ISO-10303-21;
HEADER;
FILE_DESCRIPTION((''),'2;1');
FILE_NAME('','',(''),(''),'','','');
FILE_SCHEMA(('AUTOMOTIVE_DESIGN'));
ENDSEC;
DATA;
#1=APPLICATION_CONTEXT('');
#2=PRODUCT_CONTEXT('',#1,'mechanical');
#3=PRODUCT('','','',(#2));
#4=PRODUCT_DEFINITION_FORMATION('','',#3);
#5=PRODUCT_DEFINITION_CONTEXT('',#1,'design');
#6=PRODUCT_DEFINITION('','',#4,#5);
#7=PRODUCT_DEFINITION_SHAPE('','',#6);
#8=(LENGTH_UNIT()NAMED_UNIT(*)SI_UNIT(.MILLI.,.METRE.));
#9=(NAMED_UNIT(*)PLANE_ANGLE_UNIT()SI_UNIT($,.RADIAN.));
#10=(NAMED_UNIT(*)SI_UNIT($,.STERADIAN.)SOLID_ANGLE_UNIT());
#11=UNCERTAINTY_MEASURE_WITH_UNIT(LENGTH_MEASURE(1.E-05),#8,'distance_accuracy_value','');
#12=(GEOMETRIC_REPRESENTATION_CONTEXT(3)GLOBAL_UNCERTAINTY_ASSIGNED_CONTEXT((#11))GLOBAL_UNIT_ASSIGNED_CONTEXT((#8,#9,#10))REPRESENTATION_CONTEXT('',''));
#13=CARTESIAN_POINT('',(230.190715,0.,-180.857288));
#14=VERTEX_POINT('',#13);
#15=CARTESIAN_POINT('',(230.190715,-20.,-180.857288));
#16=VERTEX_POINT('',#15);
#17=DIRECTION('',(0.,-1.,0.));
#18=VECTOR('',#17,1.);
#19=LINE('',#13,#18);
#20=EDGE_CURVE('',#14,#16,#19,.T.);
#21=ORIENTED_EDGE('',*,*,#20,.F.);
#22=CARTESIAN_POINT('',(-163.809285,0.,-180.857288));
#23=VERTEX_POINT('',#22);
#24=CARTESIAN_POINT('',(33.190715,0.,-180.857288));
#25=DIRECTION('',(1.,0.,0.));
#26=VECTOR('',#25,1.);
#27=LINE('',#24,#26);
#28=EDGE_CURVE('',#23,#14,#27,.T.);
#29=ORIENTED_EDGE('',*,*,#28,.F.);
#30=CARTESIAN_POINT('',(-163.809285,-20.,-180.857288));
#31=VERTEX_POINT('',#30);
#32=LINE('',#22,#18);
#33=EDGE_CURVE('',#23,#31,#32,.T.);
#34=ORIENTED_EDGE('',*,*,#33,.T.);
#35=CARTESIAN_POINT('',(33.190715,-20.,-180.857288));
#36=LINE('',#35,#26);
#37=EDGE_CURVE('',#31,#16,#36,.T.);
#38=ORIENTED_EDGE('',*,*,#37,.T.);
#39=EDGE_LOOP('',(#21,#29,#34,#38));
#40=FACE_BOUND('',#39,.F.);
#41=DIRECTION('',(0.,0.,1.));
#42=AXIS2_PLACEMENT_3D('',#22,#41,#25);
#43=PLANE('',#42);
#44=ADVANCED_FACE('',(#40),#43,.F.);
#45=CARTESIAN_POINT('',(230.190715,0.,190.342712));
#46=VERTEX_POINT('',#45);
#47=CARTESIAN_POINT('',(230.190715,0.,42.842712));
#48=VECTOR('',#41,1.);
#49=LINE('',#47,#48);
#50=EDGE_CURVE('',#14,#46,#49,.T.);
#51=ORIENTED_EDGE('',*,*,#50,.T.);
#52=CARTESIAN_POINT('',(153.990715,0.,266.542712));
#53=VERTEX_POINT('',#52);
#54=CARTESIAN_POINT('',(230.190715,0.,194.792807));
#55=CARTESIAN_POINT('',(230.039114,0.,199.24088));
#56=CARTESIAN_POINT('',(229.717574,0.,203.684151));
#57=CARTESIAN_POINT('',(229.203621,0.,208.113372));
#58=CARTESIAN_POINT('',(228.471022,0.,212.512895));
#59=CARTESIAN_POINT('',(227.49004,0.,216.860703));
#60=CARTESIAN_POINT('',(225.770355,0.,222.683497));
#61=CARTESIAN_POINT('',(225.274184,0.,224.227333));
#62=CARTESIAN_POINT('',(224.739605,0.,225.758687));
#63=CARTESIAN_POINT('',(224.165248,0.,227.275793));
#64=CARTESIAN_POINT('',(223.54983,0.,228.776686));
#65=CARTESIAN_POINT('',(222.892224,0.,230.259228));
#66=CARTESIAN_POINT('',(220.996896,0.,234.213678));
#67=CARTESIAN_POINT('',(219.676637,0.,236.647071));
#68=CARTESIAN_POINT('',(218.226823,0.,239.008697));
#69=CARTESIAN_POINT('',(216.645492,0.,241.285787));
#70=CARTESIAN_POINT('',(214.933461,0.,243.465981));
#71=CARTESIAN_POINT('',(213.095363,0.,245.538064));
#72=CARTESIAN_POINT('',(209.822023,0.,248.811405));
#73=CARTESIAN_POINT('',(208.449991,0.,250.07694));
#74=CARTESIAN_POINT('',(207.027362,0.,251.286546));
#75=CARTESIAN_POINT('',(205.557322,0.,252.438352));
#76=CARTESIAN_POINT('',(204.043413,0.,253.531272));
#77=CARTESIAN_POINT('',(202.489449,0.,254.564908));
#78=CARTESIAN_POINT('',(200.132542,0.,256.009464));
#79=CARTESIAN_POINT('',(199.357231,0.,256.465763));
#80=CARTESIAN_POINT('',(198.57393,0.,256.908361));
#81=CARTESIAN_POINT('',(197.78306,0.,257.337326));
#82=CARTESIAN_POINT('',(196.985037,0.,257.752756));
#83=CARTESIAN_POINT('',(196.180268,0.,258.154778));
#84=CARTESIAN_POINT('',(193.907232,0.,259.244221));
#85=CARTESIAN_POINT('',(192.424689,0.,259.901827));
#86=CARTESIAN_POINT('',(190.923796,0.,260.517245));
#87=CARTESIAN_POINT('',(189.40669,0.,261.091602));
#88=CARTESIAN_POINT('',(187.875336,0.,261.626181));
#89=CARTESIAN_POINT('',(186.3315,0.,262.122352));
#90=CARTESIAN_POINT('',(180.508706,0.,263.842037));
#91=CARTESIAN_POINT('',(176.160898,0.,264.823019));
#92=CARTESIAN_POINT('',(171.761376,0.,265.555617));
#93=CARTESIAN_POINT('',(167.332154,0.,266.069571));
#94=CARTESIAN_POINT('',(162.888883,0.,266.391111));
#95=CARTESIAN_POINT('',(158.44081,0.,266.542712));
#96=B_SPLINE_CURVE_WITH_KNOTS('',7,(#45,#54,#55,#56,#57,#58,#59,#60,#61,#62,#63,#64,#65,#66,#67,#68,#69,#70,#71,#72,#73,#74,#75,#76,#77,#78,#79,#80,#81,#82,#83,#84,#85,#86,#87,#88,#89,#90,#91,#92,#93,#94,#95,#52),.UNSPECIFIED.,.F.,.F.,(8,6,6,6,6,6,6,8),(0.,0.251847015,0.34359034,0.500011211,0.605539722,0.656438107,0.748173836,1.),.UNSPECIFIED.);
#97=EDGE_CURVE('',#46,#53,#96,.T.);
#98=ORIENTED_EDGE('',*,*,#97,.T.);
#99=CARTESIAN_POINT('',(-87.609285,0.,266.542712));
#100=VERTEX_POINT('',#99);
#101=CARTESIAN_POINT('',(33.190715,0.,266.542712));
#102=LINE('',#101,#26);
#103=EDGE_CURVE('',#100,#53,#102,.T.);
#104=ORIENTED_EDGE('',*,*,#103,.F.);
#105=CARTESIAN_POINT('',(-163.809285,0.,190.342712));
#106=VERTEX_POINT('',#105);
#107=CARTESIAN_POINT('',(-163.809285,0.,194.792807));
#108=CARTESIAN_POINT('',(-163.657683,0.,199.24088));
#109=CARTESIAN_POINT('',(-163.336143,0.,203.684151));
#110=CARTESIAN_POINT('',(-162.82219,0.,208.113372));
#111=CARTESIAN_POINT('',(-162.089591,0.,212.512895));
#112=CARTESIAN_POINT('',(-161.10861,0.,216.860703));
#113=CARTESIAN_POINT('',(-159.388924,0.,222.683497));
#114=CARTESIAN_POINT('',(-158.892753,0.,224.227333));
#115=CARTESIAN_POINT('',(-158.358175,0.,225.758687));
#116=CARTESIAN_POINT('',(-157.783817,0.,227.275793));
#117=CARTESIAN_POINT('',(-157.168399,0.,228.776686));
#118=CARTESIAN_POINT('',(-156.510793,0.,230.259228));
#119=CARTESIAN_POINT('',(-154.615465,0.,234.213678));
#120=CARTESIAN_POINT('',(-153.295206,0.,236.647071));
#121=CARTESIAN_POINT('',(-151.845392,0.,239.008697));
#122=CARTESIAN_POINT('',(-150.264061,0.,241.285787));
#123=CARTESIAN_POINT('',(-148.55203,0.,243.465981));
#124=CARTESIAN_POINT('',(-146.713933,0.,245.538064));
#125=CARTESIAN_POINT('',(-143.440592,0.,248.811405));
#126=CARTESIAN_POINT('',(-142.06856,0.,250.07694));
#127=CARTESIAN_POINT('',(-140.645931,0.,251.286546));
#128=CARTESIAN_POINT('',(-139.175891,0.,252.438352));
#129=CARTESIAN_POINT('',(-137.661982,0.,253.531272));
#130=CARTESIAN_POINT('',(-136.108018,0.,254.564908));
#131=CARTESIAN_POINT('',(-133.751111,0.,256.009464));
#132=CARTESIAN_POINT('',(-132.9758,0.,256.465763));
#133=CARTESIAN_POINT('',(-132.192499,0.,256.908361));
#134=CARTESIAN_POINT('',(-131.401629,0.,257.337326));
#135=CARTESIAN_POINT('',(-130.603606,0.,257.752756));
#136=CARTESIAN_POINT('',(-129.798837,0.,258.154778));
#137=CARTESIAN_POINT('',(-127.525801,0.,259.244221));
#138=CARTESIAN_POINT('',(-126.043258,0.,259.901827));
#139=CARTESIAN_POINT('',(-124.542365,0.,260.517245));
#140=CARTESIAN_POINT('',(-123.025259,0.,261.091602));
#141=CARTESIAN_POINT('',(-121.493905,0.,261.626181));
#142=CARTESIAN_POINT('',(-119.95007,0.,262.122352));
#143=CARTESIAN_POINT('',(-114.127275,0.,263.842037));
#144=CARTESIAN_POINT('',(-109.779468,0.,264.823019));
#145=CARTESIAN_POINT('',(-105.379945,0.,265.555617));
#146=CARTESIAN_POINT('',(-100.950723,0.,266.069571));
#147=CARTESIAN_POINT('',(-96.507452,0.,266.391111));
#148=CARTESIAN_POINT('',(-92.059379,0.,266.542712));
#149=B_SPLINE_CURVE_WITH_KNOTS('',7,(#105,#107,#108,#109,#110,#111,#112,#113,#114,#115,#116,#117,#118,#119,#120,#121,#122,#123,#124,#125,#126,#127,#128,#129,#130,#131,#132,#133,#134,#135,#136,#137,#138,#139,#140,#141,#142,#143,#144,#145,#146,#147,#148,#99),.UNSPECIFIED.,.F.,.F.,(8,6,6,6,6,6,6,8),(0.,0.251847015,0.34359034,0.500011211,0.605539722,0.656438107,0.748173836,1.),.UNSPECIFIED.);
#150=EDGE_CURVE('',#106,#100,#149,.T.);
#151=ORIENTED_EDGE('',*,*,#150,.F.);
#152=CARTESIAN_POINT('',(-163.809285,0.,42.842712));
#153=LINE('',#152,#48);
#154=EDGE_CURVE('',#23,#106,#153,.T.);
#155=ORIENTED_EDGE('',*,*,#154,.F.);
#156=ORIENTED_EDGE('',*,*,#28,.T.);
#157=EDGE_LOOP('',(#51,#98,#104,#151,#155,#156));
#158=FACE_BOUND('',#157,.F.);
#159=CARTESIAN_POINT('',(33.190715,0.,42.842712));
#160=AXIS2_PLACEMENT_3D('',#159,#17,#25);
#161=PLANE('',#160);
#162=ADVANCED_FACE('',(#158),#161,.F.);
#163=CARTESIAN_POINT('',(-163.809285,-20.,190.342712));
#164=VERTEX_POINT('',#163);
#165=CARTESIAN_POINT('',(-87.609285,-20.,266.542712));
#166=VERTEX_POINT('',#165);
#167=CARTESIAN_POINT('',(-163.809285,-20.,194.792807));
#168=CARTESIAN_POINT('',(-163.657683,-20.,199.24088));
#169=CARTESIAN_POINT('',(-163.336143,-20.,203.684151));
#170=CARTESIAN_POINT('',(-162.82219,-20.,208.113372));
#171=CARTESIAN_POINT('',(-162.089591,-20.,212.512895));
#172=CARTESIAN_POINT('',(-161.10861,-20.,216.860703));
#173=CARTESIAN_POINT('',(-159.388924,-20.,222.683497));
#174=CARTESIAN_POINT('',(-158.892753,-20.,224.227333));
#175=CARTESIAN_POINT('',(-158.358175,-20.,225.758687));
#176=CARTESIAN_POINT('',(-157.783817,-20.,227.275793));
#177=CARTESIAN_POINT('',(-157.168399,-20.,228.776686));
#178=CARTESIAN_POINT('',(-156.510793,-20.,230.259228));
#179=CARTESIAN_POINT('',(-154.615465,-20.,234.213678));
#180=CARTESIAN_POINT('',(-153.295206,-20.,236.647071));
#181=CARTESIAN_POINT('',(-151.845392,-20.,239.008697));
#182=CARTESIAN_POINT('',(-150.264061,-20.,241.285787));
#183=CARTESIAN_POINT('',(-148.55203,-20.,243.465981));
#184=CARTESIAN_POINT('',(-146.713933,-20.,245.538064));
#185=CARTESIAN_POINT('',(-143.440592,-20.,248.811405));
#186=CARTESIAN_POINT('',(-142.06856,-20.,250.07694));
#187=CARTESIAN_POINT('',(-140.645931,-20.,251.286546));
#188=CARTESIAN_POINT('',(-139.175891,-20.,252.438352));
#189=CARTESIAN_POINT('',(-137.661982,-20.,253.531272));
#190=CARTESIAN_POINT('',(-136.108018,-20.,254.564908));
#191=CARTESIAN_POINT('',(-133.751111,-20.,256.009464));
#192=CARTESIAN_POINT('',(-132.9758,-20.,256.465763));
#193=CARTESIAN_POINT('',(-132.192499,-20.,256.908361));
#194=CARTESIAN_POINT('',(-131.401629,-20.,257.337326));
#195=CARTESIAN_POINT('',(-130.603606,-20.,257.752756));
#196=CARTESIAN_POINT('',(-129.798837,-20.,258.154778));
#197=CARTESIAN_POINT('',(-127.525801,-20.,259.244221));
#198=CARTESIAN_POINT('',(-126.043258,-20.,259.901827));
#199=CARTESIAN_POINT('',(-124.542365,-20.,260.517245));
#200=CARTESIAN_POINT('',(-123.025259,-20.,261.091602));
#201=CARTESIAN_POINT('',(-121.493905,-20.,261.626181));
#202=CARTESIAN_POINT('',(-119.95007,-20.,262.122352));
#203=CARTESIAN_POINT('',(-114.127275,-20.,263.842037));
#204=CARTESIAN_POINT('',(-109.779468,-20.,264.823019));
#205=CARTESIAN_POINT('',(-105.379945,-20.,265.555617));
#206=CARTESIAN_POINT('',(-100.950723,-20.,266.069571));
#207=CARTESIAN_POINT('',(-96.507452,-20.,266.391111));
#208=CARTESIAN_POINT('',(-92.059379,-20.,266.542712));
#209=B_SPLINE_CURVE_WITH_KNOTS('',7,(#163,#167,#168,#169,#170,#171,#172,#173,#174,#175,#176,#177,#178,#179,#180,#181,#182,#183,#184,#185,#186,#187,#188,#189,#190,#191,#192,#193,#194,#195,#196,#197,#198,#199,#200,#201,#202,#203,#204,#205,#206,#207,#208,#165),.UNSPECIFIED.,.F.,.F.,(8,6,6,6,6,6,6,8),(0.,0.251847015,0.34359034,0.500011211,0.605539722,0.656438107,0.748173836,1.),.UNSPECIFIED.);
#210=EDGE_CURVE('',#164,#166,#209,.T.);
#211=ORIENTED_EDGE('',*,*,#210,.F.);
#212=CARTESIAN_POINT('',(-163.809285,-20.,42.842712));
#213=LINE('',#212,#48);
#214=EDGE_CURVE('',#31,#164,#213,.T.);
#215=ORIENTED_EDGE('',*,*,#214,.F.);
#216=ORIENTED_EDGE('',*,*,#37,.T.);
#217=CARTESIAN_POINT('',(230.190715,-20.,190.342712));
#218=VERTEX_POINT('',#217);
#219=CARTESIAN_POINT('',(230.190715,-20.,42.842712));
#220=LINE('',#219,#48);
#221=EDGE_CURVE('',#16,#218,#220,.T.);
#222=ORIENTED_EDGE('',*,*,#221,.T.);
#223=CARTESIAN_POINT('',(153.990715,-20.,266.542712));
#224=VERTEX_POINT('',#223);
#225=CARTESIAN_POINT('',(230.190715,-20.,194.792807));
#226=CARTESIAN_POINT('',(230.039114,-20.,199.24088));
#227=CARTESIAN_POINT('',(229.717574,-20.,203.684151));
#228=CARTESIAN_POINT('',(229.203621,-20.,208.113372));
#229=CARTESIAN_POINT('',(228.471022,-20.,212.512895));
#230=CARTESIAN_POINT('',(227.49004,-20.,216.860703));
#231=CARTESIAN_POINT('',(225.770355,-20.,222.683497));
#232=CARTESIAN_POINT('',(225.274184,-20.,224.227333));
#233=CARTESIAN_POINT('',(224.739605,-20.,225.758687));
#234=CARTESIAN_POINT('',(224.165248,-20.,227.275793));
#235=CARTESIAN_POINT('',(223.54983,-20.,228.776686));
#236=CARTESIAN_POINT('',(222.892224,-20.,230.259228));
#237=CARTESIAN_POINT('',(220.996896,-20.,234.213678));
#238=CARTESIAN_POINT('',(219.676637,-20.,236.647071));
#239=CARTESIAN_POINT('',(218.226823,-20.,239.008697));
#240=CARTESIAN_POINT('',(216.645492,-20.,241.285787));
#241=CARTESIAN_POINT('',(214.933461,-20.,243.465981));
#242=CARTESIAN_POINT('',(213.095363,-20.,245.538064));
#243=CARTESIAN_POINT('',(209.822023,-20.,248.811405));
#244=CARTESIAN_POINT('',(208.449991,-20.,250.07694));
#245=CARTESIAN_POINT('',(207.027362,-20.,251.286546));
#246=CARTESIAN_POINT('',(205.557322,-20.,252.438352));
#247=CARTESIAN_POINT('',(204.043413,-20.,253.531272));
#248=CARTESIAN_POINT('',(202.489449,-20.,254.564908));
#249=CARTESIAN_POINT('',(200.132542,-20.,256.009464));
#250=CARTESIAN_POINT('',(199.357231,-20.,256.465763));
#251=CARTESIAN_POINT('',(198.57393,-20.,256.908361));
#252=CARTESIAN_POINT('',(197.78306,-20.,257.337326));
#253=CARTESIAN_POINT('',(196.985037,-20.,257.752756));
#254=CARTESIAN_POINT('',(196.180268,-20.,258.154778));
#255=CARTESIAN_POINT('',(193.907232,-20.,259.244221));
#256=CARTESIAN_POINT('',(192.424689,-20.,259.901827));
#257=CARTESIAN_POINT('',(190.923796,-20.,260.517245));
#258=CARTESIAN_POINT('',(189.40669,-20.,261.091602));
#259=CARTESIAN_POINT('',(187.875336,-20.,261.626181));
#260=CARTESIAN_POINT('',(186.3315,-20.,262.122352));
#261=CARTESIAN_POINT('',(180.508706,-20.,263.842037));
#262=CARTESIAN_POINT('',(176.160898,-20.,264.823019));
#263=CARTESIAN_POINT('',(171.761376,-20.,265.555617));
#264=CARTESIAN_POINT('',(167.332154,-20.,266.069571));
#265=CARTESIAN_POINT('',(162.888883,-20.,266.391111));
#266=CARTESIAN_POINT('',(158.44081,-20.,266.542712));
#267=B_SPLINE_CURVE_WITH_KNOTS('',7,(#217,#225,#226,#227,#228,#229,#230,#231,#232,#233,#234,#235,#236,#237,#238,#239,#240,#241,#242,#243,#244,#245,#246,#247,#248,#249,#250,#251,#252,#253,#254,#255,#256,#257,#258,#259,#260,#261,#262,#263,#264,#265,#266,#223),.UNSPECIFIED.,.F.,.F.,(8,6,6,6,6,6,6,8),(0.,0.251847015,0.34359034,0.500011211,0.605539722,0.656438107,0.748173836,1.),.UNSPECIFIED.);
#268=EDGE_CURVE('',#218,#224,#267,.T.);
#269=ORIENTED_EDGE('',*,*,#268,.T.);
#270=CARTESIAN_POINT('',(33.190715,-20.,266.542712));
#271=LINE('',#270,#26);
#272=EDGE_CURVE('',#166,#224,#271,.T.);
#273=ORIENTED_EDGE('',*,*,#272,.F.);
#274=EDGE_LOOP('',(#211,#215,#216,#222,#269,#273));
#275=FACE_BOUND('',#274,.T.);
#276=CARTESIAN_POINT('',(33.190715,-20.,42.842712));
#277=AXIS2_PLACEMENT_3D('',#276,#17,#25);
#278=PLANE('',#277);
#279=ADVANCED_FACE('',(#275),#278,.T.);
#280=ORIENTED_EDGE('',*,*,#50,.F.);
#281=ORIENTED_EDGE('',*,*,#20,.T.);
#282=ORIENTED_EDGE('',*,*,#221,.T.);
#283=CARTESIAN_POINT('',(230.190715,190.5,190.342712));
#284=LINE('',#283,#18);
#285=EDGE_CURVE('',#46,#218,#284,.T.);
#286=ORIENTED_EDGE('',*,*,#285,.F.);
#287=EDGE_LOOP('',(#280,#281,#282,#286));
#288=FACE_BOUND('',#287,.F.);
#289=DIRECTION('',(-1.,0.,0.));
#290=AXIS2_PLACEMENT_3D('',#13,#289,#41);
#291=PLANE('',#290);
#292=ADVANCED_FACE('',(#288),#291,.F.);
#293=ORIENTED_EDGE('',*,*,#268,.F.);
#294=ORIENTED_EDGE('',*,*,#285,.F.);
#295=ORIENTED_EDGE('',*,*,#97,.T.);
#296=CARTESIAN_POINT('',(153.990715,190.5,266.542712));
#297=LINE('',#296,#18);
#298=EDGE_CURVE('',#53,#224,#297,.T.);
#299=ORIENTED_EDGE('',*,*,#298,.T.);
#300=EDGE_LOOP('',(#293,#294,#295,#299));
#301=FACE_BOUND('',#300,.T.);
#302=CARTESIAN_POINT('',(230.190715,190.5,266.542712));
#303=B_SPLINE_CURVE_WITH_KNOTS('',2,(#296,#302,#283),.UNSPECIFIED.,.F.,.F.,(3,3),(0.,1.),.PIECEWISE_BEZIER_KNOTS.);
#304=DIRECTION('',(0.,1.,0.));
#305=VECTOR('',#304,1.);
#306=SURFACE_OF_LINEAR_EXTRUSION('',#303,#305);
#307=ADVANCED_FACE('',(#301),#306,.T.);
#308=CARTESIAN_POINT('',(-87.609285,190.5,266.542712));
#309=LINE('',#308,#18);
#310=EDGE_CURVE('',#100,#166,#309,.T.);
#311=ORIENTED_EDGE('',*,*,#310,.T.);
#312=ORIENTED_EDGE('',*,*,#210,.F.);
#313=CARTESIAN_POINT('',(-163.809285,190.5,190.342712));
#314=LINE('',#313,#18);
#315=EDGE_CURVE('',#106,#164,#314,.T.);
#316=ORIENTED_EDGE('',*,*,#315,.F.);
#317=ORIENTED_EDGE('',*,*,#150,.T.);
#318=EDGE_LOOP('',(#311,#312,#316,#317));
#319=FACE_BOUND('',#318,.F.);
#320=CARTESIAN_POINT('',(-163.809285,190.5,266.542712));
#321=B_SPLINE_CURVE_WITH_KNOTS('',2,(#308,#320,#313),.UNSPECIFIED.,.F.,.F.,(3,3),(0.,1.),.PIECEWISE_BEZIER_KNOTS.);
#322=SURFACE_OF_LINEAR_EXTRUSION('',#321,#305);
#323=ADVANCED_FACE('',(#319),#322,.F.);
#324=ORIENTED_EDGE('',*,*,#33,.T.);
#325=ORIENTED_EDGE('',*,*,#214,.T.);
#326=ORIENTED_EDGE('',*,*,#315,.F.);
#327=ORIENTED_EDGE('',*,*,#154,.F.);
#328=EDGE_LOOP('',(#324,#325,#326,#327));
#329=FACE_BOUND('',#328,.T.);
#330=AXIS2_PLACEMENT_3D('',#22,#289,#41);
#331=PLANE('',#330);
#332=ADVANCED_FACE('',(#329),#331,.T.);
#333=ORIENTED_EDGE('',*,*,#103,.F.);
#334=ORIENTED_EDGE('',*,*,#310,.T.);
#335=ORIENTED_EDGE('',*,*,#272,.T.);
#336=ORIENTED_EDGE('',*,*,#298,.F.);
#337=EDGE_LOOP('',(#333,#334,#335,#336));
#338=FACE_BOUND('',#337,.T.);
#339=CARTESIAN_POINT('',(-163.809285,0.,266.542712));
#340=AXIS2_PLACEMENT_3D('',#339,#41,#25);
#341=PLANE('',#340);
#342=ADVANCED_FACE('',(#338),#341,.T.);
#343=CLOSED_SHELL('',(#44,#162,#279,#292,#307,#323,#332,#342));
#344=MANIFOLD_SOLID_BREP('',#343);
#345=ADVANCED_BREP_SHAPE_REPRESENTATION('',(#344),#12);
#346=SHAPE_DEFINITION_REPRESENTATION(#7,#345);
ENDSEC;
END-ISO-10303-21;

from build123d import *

# Parameters (mm, degrees)
F0_W        = 394
F0_H        = 447.4
F1_DEPTH    = 20
F2_T1_DEPTH = 401


# Not quite as in the source:
# - a fillet or chamfer that OpenCascade refuses, or shapes differently, is made with other operations: its cross-section is extruded or revolved along the edge and cut away or added


with BuildPart() as f1:
    # F0 (on Front) → F1 (new body)
    with BuildSketch(Plane.XZ):
        with Locations((33.1907154322, 42.8427122533)):
            Rectangle(F0_W, F0_H)
    extrude(amount=F1_DEPTH)

    # F2: fillet of radius 76.2 on 2 edges, made by hand

    # F2_s2 → F2_t1 (cut)
    with BuildSketch(Plane.XZ.offset(-190.5)):
        with BuildLine():
            add(Edge.make_bspline(
                [(153.9907154322, 266.5427122533), (230.1907154322, 266.5427122533), (230.1907154322, 190.3427122533)],
                knots=[0, 0, 0, 1, 1, 1], degree=2, weights=[1, 1, 1]))
            Line((230.1907154322, 190.3427122533), (230.1907154322, 266.5427122533))
            Line((230.1907154322, 266.5427122533), (153.9907154322, 266.5427122533))
        make_face()
        with BuildLine():
            add(Edge.make_bspline(
                [(-87.6092845678, 266.5427122533), (-163.8092845678, 266.5427122533), (-163.8092845678, 190.3427122533)],
                knots=[0, 0, 0, 1, 1, 1], degree=2, weights=[1, 1, 1]))
            Line((-163.8092845678, 190.3427122533), (-163.8092845678, 266.5427122533))
            Line((-163.8092845678, 266.5427122533), (-87.6092845678, 266.5427122533))
        make_face()
    extrude(amount=F2_T1_DEPTH, mode=Mode.SUBTRACT)


solid = f1.part
